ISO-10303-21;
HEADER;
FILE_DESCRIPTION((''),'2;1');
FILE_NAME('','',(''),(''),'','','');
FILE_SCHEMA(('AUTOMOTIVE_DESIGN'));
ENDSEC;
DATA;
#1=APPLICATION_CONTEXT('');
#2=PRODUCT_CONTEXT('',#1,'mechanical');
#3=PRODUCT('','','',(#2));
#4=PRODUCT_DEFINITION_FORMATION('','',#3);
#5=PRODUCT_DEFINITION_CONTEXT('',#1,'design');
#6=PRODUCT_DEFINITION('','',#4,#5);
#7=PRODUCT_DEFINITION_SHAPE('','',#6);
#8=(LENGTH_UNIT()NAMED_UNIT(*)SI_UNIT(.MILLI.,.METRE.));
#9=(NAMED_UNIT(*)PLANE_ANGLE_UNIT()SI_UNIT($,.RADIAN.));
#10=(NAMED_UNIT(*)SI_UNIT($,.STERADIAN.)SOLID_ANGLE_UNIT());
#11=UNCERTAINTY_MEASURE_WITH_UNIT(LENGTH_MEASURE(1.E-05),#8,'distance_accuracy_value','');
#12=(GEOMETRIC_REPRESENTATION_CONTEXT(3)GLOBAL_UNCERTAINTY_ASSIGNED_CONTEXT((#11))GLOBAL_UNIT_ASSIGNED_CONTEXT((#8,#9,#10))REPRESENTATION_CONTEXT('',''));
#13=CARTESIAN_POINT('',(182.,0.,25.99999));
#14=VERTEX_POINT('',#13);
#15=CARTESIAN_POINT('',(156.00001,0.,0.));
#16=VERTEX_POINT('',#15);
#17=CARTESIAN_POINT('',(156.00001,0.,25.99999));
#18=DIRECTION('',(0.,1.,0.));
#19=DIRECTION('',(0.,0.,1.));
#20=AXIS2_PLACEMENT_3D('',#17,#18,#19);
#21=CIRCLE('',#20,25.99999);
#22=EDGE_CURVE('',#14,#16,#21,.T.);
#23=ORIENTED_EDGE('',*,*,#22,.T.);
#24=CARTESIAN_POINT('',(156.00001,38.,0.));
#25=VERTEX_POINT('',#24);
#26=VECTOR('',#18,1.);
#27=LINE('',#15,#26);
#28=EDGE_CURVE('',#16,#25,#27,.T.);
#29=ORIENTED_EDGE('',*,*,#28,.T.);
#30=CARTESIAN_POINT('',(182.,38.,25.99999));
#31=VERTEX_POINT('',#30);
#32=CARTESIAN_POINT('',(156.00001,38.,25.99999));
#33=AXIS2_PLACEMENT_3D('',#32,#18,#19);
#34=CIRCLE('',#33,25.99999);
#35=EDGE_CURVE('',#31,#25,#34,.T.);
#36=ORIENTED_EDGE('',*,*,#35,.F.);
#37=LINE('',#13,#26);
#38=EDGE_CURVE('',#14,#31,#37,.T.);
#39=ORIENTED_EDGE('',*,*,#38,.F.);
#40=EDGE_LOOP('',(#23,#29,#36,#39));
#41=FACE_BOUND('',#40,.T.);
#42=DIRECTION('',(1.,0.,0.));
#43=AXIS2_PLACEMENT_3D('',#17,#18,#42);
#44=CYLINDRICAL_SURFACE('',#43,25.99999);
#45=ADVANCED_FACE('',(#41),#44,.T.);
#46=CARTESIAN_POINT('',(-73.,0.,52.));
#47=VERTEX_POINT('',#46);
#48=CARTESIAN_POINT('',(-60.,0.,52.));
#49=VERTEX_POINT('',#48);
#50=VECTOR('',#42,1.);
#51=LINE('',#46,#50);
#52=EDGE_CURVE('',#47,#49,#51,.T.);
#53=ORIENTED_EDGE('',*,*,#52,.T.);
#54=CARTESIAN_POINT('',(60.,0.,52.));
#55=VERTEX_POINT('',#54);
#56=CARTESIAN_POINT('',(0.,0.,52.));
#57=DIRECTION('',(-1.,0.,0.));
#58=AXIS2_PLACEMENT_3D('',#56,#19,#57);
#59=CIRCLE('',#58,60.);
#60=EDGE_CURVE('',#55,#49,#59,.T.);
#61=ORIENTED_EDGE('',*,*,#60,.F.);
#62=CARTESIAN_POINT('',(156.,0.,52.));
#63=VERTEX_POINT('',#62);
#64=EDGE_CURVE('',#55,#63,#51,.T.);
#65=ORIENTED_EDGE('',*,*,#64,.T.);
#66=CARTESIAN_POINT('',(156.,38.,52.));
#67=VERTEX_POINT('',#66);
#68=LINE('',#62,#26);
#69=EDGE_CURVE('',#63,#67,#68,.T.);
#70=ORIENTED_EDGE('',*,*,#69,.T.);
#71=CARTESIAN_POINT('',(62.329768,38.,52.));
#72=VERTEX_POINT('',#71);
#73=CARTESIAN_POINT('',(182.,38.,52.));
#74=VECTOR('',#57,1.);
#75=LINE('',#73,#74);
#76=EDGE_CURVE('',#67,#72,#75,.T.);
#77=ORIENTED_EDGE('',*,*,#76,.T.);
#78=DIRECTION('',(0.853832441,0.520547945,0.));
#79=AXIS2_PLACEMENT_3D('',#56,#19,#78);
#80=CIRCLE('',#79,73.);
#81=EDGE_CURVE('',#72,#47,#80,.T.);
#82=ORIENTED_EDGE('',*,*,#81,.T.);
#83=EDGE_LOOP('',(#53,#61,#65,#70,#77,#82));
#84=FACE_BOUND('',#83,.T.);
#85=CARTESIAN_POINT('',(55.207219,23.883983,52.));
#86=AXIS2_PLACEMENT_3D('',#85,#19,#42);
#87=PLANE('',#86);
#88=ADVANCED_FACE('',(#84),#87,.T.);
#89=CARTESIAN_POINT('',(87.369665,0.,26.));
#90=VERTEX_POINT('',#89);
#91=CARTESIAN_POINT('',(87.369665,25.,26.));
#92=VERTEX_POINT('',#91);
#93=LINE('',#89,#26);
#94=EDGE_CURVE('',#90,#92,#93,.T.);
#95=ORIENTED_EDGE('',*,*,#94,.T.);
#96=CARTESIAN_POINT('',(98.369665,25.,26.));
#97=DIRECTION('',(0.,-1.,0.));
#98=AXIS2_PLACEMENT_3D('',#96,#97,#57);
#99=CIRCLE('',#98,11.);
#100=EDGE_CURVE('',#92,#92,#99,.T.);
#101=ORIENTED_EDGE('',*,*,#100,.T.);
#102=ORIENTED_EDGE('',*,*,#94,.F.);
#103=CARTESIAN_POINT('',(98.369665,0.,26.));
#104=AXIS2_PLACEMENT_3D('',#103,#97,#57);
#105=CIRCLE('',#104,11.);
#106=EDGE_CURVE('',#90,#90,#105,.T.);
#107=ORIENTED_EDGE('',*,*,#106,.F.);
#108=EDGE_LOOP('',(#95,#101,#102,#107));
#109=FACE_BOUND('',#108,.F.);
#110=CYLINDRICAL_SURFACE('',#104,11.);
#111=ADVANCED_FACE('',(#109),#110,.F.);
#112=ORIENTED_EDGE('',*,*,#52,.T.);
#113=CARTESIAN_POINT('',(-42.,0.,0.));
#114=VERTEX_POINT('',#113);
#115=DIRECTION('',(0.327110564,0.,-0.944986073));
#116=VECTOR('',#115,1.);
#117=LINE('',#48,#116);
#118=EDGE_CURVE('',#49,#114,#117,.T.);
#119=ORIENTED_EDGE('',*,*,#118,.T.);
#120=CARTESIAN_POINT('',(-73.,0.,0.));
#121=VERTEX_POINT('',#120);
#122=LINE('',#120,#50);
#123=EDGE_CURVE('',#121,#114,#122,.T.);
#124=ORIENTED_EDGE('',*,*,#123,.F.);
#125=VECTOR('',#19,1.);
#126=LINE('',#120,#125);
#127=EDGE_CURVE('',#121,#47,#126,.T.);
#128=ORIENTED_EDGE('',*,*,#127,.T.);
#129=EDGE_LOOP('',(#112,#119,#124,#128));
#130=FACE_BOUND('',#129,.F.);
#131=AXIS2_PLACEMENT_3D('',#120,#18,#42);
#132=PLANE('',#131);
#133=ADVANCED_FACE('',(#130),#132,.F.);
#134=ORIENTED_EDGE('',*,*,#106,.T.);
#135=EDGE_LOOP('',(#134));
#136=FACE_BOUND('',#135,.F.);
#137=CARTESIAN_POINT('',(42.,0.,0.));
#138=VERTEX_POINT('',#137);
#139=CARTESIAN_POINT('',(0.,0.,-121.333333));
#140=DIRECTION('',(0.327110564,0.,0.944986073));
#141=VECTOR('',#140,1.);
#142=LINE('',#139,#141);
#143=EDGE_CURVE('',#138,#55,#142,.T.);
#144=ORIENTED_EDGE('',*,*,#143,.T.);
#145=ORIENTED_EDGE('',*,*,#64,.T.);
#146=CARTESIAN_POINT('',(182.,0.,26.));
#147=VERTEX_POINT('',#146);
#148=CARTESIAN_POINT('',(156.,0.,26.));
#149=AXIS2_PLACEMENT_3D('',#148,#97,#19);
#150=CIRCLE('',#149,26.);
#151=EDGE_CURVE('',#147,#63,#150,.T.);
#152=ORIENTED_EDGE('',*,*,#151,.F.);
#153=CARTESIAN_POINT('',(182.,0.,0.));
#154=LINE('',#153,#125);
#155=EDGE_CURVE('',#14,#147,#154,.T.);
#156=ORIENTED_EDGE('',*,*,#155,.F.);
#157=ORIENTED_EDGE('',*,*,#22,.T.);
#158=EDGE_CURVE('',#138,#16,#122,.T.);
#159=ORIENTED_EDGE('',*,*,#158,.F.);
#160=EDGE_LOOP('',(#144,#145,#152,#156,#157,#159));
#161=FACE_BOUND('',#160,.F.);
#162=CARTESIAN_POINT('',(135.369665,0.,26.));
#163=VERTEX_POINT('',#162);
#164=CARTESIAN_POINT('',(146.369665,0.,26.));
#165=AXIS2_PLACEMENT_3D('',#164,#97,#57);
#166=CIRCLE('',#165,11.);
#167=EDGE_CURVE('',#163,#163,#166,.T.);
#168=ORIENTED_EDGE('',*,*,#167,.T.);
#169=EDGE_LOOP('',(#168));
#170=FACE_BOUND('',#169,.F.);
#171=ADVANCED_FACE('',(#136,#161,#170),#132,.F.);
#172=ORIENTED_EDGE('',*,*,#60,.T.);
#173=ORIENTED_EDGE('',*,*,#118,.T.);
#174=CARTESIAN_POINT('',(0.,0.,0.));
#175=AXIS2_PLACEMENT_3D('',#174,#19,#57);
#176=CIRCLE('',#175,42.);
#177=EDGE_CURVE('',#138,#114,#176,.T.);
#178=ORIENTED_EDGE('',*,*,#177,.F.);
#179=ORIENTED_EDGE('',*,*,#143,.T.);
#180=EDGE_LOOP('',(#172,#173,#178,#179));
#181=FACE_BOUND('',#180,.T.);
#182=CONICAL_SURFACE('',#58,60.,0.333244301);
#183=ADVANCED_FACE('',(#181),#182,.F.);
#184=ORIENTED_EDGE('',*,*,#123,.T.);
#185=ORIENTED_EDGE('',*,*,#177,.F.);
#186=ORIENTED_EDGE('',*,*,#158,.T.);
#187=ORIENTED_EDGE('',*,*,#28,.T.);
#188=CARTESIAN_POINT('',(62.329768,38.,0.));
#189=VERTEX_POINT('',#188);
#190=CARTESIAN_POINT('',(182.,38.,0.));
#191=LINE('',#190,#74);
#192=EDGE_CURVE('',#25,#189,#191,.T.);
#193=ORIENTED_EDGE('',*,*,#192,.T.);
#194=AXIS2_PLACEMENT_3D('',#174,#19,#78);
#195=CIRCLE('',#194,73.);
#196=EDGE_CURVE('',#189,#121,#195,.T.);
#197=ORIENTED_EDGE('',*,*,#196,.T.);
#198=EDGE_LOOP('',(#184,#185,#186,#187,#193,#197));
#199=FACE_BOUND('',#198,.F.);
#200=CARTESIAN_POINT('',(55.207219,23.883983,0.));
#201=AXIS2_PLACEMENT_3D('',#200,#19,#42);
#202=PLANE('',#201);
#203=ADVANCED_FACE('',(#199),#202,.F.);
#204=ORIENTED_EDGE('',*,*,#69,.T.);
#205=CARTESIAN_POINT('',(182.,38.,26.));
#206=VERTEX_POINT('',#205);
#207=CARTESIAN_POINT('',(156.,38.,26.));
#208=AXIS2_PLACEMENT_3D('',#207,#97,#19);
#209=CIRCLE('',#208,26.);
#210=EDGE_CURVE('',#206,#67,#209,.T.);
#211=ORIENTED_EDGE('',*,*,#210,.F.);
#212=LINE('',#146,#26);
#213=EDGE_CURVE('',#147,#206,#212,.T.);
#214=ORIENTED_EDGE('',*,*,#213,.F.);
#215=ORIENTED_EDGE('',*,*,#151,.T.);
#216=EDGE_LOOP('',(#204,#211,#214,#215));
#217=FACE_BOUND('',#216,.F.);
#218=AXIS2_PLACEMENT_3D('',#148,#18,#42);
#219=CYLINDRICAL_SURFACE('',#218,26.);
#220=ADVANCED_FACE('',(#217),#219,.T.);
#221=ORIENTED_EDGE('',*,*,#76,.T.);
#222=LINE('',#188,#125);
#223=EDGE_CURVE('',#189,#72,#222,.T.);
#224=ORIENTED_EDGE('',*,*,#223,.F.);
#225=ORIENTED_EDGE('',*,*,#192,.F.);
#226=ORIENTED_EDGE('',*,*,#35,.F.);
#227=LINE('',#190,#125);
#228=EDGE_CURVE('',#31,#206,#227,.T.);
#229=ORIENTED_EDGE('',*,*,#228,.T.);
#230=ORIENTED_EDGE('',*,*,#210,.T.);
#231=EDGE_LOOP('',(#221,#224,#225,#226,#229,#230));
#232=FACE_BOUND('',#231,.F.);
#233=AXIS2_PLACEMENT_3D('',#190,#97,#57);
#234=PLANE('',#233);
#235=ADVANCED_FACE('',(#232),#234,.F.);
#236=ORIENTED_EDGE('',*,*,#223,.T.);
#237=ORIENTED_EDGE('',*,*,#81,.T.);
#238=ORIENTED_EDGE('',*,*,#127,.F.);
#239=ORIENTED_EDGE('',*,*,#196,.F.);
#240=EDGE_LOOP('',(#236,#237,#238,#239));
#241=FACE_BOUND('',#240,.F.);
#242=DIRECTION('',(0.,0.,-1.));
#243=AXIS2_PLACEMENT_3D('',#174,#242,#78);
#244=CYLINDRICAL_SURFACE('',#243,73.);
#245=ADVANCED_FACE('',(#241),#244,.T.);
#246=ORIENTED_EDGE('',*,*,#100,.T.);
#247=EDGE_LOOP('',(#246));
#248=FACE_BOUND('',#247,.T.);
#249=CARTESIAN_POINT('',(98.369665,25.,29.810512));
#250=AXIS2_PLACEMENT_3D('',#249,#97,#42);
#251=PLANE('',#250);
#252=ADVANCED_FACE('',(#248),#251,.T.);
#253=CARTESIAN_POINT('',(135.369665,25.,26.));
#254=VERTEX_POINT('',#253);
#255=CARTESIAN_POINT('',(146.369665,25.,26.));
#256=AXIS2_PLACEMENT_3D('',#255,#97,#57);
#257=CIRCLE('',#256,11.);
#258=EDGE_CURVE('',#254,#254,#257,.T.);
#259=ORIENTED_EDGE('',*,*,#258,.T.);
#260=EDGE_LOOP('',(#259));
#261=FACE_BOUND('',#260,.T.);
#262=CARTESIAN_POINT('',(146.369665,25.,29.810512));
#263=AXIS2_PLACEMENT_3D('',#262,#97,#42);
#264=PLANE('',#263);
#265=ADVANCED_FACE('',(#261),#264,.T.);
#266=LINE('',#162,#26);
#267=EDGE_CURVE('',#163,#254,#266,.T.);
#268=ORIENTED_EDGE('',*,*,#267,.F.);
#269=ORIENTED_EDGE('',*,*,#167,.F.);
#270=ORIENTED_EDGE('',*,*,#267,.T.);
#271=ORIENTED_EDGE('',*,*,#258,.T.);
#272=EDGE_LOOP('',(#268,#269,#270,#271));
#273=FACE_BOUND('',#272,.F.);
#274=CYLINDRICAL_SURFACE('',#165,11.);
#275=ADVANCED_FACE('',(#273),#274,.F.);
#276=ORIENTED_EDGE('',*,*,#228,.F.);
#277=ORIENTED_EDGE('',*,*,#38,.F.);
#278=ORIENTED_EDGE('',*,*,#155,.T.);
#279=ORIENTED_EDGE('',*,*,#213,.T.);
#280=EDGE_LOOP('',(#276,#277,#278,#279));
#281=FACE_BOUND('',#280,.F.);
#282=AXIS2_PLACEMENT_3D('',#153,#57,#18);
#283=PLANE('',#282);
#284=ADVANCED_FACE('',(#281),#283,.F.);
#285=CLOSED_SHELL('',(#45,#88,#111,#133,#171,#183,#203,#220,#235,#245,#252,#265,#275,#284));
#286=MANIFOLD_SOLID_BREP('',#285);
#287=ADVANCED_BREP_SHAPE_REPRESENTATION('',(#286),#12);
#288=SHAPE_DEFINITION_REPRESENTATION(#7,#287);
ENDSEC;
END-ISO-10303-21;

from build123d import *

# Parameters (mm, degrees)
F1_DEPTH = 52
F5_DEPTH = 25
F6_R     = 26
F7_R     = 25.99999


# Not quite as in the source:
# - a fillet or chamfer is up to 0.001 mm smaller than in the source, because OpenCascade refuses the exact size


with BuildPart() as f1:
    # F0 (on Top) → F1 (new body)
    with BuildSketch(Plane.XY):
        with BuildLine():
            Line((182, 38), (62.329768169, 38))
            ThreePointArc((62.329768169, 38), (-19.7348286497, 70.2818364741), (-73, 0))
            Line((-73, 0), (0, 0))
            Line((0, 0), (182, 0))
            Line((182, 0), (182, 38))
        make_face()
    extrude(amount=F1_DEPTH)

    # F2 (on face) → F3 (revolve, cut)
    with BuildSketch(Plane.XZ):
        Polygon((0, 52), (-60, 52), (-42, 0), (0, 0), align=None)
    revolve(axis=Axis((0, 0, 26), (0, 0, 1)), mode=Mode.SUBTRACT)

    # F4 (on face) → F5 (cut)
    with BuildSketch(Plane.XZ):
        with BuildLine():
            Line((87.3696654439, 26), (109.3696654439, 26))
            ThreePointArc((109.3696654439, 26), (98.3696654439, 37), (87.3696654439, 26))
        make_face()
        with BuildLine():
            ThreePointArc((157.3696654439, 26), (146.3696654439, 37), (135.3696654439, 26))
            Line((135.3696654439, 26), (157.3696654439, 26))
        make_face()
        with BuildLine():
            Line((157.3696654439, 26), (135.3696654439, 26))
            ThreePointArc((135.3696654439, 26), (146.3696654439, 15), (157.3696654439, 26))
        make_face()
        with BuildLine():
            ThreePointArc((87.3696654439, 26), (98.3696654439, 15), (109.3696654439, 26))
            Line((109.3696654439, 26), (87.3696654439, 26))
        make_face()
    extrude(amount=-F5_DEPTH, mode=Mode.SUBTRACT)

    # F6
    f6_edges = [f1.edges().sort_by_distance(p)[0] for p in [
        (182, 19, 52),
    ]]
    fillet(f6_edges, radius=F6_R)

    # F7 (radius 26 in the source; OpenCascade refuses exactly that, so slightly less here)
    f7_edges = [f1.edges().sort_by_distance(p)[0] for p in [
        (182, 19, 0),
    ]]
    fillet(f7_edges, radius=F7_R)


solid = f1.part
